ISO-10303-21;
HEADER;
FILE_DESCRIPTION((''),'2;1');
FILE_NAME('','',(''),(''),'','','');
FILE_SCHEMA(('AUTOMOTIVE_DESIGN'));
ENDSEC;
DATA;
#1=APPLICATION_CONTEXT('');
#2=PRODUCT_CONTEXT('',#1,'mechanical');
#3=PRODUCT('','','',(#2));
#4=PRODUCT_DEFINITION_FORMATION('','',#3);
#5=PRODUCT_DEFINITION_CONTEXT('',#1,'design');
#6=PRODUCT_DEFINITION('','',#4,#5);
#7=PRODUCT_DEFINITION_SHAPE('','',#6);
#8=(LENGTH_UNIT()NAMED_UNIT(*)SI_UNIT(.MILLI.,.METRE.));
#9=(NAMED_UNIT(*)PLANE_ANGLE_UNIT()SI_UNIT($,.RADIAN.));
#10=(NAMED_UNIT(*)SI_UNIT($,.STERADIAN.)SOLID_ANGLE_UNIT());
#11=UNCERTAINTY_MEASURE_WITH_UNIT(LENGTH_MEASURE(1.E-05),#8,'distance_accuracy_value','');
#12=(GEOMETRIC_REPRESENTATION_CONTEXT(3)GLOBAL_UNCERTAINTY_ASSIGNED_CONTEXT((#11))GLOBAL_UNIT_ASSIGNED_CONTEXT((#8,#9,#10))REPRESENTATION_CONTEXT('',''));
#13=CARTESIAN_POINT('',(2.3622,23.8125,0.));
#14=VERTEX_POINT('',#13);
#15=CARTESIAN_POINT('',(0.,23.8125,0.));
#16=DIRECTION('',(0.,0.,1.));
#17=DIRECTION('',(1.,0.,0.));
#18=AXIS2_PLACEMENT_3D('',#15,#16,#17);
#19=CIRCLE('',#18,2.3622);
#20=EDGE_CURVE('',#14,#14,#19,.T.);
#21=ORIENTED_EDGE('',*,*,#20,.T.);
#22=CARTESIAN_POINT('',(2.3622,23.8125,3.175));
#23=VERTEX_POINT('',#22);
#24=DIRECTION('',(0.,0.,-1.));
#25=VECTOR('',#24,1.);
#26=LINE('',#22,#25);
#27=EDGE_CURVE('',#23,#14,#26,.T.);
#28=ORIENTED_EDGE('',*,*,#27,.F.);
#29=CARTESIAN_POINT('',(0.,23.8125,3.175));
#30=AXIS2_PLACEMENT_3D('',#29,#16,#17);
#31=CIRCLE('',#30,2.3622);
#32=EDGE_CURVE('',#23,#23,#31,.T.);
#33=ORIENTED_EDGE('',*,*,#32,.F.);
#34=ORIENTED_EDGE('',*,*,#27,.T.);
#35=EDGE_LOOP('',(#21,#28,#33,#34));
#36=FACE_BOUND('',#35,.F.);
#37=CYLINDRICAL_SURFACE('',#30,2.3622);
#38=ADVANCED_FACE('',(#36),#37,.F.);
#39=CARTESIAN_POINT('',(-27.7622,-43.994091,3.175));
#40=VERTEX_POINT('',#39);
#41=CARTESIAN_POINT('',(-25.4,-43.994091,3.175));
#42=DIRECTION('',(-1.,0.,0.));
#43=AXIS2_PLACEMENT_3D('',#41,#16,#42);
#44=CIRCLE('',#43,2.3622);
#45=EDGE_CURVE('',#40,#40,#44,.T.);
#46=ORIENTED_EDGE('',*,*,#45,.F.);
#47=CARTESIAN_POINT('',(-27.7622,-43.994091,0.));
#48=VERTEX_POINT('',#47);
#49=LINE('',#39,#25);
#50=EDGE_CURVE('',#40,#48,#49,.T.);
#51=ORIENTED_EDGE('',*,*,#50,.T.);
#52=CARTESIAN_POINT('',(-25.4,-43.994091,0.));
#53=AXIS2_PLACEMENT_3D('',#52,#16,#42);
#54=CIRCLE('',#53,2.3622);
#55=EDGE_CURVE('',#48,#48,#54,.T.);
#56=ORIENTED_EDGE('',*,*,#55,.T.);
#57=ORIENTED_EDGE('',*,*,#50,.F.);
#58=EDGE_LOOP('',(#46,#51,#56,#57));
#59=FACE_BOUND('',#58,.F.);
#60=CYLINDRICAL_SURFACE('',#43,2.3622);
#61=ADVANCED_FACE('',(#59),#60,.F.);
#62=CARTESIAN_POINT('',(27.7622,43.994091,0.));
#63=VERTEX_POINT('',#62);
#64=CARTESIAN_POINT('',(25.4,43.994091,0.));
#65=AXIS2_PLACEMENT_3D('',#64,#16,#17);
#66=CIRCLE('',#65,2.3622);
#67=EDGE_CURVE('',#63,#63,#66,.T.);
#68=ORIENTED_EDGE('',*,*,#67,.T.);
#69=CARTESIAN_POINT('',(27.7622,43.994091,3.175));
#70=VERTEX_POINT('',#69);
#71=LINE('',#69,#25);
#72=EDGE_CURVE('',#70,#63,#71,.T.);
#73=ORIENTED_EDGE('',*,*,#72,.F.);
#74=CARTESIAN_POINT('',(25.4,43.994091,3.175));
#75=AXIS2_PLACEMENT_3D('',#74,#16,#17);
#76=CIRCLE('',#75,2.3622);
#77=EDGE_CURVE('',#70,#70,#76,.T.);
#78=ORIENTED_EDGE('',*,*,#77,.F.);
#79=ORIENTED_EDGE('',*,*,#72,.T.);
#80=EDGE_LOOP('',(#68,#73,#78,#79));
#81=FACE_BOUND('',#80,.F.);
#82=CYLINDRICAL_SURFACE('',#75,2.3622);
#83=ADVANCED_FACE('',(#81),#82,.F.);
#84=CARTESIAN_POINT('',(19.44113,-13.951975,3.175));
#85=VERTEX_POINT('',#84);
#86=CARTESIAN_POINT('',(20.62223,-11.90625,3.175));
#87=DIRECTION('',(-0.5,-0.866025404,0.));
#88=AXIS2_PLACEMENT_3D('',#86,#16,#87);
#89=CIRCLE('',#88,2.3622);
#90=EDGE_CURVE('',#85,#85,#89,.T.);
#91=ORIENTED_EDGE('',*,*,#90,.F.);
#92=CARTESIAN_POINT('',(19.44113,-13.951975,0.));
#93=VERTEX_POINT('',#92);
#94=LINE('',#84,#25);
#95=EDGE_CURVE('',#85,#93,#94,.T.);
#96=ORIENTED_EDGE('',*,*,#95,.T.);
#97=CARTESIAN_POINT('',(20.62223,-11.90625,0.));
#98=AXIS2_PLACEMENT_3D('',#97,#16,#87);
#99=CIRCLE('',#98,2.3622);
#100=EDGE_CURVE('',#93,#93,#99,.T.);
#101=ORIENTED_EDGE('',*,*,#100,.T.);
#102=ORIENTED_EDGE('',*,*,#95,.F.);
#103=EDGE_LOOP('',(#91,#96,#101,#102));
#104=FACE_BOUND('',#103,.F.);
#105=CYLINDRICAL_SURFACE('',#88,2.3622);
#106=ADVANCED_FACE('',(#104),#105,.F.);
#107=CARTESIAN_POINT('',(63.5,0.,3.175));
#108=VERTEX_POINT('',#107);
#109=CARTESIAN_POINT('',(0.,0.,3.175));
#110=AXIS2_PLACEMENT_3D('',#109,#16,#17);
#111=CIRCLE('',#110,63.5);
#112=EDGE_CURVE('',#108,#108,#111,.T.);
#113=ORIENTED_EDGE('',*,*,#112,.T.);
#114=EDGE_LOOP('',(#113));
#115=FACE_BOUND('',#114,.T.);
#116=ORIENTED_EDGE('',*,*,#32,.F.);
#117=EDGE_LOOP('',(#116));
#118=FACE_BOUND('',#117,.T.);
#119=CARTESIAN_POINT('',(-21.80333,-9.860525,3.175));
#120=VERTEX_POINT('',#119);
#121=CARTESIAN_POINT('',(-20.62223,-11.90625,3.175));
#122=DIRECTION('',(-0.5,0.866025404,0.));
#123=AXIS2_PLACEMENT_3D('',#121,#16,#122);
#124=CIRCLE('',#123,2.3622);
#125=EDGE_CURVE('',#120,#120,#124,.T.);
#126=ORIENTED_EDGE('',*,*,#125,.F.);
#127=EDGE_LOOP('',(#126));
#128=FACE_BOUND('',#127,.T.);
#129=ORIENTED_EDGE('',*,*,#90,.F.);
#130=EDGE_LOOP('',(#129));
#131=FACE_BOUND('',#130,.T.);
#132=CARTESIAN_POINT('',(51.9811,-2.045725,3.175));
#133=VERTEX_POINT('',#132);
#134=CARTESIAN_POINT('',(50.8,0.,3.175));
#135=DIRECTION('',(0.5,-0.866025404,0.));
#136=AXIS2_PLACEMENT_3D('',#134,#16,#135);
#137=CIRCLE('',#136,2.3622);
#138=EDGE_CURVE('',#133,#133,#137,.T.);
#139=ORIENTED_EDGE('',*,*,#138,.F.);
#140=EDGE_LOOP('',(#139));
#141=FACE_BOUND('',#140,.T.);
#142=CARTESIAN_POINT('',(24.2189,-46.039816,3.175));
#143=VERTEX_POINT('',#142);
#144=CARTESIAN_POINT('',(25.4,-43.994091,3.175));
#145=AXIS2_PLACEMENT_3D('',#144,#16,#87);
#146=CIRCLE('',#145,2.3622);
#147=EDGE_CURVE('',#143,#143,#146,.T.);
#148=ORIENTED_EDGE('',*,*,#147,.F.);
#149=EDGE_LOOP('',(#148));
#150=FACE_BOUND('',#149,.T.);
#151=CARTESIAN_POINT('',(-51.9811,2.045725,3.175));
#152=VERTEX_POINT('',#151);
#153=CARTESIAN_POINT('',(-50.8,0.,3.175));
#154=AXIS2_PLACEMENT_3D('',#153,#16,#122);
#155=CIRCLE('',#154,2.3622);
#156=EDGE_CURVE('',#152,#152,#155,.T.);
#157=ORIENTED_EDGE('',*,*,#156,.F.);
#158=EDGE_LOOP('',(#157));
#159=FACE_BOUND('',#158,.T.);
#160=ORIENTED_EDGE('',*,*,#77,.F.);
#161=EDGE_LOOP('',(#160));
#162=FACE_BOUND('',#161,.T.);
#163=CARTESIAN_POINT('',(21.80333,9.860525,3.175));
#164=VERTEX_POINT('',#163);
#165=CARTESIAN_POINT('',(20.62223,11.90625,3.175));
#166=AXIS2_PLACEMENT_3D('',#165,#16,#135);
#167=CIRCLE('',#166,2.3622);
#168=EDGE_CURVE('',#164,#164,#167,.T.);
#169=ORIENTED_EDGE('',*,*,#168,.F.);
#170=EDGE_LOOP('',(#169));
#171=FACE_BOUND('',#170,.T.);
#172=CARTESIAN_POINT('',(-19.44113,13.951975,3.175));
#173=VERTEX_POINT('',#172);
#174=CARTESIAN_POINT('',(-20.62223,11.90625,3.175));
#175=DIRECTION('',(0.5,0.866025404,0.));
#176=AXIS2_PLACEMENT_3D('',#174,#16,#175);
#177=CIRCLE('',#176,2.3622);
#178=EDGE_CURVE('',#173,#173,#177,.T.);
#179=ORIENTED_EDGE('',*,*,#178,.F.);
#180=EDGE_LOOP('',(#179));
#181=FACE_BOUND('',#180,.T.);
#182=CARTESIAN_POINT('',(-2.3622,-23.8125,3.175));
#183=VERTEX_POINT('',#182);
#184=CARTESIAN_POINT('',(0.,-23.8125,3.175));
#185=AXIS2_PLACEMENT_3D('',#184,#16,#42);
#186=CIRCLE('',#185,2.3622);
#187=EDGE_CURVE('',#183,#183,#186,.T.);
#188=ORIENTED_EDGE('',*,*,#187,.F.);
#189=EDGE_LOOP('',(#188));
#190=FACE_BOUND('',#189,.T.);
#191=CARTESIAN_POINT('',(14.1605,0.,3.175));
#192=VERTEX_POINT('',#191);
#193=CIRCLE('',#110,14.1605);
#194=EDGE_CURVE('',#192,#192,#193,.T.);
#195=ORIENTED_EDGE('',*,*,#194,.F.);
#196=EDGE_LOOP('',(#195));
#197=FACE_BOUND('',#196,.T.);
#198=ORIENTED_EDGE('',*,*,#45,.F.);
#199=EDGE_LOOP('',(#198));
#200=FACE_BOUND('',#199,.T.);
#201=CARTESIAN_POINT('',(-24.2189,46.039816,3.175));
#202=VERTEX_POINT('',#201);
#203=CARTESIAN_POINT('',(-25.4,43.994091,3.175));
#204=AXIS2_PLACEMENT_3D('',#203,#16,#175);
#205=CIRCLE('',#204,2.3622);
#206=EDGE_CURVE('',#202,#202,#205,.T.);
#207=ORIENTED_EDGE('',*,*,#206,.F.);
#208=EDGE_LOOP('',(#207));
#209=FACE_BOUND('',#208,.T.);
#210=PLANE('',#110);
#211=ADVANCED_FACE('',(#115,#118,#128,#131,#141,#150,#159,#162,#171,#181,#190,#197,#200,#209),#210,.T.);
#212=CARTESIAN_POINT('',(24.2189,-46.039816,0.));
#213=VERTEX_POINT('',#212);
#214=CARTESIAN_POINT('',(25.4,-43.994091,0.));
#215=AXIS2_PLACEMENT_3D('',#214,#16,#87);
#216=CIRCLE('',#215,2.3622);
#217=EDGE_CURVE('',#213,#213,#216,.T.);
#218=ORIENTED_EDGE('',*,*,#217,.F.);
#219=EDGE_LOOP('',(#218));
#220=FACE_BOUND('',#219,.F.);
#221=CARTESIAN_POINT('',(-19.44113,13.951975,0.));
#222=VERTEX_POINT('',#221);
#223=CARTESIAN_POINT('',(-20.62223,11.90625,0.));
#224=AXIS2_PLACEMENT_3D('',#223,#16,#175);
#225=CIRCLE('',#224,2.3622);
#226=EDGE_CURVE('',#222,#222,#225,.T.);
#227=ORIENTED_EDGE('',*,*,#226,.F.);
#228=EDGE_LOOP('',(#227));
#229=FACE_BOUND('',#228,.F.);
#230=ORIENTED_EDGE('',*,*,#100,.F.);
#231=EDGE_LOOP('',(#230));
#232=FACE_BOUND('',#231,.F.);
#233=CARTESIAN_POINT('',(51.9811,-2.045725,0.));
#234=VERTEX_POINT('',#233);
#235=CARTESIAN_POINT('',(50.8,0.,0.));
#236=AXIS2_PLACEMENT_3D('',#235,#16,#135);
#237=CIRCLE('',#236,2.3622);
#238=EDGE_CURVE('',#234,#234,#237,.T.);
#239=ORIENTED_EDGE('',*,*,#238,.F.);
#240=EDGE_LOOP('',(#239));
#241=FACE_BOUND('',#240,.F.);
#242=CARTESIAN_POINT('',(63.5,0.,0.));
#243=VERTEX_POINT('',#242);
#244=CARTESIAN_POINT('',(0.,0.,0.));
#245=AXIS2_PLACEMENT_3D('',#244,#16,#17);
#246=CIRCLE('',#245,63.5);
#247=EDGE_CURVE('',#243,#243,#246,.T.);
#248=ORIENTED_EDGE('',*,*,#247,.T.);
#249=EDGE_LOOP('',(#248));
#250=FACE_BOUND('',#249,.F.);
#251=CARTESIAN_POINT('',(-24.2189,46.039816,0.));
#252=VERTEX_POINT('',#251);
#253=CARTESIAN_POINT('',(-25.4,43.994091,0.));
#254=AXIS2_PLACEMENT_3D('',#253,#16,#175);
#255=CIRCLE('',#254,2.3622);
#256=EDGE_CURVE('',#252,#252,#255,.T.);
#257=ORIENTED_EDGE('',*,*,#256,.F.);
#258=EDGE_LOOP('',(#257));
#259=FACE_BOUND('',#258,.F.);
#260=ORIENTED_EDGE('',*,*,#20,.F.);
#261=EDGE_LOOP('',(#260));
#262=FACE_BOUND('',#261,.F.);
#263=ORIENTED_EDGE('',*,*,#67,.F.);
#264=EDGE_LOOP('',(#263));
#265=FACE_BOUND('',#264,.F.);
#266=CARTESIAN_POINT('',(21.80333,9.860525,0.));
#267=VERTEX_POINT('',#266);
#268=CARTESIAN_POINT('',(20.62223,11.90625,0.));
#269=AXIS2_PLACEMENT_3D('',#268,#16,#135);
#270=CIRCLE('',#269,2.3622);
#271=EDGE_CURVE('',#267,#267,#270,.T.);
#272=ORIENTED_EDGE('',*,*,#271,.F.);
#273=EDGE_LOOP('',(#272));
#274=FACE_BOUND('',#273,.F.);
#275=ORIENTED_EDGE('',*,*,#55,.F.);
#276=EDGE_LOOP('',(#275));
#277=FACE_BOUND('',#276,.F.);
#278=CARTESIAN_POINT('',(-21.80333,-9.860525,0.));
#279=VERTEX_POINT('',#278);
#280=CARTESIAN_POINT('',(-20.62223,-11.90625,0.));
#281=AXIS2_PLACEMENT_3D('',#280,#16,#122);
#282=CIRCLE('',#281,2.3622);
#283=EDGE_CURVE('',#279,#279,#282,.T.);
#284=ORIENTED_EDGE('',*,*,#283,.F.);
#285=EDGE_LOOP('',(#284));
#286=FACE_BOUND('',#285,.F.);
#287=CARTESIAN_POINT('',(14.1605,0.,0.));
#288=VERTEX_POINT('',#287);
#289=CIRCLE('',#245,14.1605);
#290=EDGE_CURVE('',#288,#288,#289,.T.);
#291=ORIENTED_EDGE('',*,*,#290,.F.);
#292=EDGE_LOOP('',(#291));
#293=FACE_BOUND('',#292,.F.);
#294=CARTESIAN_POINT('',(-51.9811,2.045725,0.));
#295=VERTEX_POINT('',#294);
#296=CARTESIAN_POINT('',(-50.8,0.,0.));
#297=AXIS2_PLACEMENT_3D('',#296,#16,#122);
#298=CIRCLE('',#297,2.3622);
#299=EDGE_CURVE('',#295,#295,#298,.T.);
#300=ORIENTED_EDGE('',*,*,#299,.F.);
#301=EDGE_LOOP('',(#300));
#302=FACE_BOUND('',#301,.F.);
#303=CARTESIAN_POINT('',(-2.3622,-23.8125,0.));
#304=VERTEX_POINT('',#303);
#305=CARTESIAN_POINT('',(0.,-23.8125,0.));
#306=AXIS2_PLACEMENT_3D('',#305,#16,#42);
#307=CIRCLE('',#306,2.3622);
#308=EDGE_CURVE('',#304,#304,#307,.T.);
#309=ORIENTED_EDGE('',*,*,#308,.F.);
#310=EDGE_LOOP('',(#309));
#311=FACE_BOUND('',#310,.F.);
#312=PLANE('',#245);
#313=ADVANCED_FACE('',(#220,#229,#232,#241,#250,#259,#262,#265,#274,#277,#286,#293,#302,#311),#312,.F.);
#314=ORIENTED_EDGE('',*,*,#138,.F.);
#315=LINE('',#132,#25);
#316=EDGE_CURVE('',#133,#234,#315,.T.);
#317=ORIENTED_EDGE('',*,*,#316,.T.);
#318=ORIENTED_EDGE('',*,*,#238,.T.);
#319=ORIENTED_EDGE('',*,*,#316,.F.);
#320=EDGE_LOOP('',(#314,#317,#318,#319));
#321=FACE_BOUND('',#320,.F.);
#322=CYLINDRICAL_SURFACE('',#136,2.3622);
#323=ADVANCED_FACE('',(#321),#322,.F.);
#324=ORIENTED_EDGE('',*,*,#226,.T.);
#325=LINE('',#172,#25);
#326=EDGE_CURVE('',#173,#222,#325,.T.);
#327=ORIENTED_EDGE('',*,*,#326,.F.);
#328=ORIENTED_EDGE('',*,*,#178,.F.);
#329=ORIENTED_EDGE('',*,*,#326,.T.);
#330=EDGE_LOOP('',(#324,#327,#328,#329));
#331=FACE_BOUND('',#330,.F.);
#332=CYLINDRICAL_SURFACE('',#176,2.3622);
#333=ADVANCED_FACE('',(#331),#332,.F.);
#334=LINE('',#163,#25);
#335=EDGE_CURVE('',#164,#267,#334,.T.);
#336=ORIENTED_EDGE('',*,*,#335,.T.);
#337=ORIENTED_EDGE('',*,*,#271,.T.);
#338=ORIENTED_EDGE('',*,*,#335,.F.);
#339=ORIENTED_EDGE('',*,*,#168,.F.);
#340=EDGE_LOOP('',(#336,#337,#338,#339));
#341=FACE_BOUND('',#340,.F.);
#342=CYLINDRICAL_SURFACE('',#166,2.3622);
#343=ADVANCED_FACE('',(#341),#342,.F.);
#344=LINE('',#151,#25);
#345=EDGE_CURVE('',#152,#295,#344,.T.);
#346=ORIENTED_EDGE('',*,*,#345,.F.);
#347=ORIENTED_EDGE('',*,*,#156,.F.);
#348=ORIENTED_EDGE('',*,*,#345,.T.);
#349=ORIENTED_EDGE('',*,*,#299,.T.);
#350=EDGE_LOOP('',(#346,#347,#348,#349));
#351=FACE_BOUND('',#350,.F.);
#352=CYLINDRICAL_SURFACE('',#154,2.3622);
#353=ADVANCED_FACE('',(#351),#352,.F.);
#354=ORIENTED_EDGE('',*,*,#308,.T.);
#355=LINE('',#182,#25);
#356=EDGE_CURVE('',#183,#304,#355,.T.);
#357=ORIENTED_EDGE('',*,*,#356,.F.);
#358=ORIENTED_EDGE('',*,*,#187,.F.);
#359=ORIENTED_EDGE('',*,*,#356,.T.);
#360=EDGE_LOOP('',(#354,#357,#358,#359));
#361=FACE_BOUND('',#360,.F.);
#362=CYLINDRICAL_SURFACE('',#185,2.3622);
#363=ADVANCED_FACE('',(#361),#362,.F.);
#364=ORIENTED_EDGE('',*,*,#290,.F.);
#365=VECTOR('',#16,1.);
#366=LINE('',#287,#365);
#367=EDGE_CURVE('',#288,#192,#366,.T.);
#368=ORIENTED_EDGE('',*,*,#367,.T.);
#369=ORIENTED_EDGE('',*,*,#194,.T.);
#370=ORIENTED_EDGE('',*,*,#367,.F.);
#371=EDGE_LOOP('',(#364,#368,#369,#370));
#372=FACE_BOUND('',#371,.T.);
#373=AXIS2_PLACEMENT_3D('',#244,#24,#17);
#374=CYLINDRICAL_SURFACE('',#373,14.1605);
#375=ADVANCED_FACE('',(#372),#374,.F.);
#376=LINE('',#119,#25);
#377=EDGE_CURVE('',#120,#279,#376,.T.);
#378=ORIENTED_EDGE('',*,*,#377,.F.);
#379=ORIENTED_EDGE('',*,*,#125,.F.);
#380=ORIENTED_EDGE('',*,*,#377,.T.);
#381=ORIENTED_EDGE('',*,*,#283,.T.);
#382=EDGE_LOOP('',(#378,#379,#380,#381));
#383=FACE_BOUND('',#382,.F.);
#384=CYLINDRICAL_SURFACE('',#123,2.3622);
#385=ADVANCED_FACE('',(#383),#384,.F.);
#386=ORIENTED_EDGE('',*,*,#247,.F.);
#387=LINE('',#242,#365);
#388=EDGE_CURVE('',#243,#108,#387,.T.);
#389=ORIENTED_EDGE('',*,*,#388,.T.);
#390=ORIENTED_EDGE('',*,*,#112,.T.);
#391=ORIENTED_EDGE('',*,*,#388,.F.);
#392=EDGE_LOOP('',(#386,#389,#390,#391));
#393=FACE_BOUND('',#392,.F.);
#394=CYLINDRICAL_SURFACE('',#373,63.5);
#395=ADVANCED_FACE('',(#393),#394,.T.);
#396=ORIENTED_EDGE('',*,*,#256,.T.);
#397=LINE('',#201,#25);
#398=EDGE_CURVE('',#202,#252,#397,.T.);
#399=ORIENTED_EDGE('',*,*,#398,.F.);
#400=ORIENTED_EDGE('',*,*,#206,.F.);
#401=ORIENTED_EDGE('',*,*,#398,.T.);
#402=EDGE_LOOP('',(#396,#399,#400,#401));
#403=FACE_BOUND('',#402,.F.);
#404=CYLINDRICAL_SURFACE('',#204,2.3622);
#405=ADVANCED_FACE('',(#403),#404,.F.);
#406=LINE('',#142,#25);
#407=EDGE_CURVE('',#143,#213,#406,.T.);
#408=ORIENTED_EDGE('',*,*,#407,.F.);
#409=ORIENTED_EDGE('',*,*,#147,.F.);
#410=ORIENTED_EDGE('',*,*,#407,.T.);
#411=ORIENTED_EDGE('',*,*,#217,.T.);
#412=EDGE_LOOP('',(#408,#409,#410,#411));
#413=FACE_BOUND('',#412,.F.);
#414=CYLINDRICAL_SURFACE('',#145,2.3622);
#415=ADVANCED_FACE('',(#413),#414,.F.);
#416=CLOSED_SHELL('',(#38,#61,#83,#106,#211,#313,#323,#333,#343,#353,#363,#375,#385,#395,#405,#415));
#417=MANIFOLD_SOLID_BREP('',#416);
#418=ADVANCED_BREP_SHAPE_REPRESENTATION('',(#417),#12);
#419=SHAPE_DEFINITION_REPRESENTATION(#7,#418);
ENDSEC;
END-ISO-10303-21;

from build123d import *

# Parameters (mm, degrees)
F0_R            = 63.5
F0_R_2          = 14.1605
F1_DEPTH        = 3.175
F2_R            = 2.3622
F3_DEPTH        = 3.176
F3_COPIES_COUNT = 6


# Not quite as in the source:
# - a pattern or mirror of a feature is missing from the dataset's text; its kind, count and spacing are read off the source's solid


with BuildPart() as f1:
    # F0 (on Top) → F1 (new body)
    with BuildSketch(Plane.XY):
        Circle(F0_R)
        Circle(F0_R_2, mode=Mode.SUBTRACT)
    extrude(amount=F1_DEPTH)

    # F2 (on face) → F3 (cut, through all)
    with BuildSketch(Plane.XY.offset(3.175)):
        with Locations((0, 23.8125)):
            Circle(F2_R)
        with Locations((25.4, 43.9940905122)):
            Circle(F2_R)
    f3 = extrude(amount=-F3_DEPTH, mode=Mode.SUBTRACT)

    # F3_copies: F3 ×6 about axis
    f3_copies_axis = Axis((0, 0, 0), (0, 0, 1))
    for i in range(1, F3_COPIES_COUNT):
        add(f3.rotate(f3_copies_axis, i * 360 / F3_COPIES_COUNT), mode=Mode.SUBTRACT)


solid = f1.part
